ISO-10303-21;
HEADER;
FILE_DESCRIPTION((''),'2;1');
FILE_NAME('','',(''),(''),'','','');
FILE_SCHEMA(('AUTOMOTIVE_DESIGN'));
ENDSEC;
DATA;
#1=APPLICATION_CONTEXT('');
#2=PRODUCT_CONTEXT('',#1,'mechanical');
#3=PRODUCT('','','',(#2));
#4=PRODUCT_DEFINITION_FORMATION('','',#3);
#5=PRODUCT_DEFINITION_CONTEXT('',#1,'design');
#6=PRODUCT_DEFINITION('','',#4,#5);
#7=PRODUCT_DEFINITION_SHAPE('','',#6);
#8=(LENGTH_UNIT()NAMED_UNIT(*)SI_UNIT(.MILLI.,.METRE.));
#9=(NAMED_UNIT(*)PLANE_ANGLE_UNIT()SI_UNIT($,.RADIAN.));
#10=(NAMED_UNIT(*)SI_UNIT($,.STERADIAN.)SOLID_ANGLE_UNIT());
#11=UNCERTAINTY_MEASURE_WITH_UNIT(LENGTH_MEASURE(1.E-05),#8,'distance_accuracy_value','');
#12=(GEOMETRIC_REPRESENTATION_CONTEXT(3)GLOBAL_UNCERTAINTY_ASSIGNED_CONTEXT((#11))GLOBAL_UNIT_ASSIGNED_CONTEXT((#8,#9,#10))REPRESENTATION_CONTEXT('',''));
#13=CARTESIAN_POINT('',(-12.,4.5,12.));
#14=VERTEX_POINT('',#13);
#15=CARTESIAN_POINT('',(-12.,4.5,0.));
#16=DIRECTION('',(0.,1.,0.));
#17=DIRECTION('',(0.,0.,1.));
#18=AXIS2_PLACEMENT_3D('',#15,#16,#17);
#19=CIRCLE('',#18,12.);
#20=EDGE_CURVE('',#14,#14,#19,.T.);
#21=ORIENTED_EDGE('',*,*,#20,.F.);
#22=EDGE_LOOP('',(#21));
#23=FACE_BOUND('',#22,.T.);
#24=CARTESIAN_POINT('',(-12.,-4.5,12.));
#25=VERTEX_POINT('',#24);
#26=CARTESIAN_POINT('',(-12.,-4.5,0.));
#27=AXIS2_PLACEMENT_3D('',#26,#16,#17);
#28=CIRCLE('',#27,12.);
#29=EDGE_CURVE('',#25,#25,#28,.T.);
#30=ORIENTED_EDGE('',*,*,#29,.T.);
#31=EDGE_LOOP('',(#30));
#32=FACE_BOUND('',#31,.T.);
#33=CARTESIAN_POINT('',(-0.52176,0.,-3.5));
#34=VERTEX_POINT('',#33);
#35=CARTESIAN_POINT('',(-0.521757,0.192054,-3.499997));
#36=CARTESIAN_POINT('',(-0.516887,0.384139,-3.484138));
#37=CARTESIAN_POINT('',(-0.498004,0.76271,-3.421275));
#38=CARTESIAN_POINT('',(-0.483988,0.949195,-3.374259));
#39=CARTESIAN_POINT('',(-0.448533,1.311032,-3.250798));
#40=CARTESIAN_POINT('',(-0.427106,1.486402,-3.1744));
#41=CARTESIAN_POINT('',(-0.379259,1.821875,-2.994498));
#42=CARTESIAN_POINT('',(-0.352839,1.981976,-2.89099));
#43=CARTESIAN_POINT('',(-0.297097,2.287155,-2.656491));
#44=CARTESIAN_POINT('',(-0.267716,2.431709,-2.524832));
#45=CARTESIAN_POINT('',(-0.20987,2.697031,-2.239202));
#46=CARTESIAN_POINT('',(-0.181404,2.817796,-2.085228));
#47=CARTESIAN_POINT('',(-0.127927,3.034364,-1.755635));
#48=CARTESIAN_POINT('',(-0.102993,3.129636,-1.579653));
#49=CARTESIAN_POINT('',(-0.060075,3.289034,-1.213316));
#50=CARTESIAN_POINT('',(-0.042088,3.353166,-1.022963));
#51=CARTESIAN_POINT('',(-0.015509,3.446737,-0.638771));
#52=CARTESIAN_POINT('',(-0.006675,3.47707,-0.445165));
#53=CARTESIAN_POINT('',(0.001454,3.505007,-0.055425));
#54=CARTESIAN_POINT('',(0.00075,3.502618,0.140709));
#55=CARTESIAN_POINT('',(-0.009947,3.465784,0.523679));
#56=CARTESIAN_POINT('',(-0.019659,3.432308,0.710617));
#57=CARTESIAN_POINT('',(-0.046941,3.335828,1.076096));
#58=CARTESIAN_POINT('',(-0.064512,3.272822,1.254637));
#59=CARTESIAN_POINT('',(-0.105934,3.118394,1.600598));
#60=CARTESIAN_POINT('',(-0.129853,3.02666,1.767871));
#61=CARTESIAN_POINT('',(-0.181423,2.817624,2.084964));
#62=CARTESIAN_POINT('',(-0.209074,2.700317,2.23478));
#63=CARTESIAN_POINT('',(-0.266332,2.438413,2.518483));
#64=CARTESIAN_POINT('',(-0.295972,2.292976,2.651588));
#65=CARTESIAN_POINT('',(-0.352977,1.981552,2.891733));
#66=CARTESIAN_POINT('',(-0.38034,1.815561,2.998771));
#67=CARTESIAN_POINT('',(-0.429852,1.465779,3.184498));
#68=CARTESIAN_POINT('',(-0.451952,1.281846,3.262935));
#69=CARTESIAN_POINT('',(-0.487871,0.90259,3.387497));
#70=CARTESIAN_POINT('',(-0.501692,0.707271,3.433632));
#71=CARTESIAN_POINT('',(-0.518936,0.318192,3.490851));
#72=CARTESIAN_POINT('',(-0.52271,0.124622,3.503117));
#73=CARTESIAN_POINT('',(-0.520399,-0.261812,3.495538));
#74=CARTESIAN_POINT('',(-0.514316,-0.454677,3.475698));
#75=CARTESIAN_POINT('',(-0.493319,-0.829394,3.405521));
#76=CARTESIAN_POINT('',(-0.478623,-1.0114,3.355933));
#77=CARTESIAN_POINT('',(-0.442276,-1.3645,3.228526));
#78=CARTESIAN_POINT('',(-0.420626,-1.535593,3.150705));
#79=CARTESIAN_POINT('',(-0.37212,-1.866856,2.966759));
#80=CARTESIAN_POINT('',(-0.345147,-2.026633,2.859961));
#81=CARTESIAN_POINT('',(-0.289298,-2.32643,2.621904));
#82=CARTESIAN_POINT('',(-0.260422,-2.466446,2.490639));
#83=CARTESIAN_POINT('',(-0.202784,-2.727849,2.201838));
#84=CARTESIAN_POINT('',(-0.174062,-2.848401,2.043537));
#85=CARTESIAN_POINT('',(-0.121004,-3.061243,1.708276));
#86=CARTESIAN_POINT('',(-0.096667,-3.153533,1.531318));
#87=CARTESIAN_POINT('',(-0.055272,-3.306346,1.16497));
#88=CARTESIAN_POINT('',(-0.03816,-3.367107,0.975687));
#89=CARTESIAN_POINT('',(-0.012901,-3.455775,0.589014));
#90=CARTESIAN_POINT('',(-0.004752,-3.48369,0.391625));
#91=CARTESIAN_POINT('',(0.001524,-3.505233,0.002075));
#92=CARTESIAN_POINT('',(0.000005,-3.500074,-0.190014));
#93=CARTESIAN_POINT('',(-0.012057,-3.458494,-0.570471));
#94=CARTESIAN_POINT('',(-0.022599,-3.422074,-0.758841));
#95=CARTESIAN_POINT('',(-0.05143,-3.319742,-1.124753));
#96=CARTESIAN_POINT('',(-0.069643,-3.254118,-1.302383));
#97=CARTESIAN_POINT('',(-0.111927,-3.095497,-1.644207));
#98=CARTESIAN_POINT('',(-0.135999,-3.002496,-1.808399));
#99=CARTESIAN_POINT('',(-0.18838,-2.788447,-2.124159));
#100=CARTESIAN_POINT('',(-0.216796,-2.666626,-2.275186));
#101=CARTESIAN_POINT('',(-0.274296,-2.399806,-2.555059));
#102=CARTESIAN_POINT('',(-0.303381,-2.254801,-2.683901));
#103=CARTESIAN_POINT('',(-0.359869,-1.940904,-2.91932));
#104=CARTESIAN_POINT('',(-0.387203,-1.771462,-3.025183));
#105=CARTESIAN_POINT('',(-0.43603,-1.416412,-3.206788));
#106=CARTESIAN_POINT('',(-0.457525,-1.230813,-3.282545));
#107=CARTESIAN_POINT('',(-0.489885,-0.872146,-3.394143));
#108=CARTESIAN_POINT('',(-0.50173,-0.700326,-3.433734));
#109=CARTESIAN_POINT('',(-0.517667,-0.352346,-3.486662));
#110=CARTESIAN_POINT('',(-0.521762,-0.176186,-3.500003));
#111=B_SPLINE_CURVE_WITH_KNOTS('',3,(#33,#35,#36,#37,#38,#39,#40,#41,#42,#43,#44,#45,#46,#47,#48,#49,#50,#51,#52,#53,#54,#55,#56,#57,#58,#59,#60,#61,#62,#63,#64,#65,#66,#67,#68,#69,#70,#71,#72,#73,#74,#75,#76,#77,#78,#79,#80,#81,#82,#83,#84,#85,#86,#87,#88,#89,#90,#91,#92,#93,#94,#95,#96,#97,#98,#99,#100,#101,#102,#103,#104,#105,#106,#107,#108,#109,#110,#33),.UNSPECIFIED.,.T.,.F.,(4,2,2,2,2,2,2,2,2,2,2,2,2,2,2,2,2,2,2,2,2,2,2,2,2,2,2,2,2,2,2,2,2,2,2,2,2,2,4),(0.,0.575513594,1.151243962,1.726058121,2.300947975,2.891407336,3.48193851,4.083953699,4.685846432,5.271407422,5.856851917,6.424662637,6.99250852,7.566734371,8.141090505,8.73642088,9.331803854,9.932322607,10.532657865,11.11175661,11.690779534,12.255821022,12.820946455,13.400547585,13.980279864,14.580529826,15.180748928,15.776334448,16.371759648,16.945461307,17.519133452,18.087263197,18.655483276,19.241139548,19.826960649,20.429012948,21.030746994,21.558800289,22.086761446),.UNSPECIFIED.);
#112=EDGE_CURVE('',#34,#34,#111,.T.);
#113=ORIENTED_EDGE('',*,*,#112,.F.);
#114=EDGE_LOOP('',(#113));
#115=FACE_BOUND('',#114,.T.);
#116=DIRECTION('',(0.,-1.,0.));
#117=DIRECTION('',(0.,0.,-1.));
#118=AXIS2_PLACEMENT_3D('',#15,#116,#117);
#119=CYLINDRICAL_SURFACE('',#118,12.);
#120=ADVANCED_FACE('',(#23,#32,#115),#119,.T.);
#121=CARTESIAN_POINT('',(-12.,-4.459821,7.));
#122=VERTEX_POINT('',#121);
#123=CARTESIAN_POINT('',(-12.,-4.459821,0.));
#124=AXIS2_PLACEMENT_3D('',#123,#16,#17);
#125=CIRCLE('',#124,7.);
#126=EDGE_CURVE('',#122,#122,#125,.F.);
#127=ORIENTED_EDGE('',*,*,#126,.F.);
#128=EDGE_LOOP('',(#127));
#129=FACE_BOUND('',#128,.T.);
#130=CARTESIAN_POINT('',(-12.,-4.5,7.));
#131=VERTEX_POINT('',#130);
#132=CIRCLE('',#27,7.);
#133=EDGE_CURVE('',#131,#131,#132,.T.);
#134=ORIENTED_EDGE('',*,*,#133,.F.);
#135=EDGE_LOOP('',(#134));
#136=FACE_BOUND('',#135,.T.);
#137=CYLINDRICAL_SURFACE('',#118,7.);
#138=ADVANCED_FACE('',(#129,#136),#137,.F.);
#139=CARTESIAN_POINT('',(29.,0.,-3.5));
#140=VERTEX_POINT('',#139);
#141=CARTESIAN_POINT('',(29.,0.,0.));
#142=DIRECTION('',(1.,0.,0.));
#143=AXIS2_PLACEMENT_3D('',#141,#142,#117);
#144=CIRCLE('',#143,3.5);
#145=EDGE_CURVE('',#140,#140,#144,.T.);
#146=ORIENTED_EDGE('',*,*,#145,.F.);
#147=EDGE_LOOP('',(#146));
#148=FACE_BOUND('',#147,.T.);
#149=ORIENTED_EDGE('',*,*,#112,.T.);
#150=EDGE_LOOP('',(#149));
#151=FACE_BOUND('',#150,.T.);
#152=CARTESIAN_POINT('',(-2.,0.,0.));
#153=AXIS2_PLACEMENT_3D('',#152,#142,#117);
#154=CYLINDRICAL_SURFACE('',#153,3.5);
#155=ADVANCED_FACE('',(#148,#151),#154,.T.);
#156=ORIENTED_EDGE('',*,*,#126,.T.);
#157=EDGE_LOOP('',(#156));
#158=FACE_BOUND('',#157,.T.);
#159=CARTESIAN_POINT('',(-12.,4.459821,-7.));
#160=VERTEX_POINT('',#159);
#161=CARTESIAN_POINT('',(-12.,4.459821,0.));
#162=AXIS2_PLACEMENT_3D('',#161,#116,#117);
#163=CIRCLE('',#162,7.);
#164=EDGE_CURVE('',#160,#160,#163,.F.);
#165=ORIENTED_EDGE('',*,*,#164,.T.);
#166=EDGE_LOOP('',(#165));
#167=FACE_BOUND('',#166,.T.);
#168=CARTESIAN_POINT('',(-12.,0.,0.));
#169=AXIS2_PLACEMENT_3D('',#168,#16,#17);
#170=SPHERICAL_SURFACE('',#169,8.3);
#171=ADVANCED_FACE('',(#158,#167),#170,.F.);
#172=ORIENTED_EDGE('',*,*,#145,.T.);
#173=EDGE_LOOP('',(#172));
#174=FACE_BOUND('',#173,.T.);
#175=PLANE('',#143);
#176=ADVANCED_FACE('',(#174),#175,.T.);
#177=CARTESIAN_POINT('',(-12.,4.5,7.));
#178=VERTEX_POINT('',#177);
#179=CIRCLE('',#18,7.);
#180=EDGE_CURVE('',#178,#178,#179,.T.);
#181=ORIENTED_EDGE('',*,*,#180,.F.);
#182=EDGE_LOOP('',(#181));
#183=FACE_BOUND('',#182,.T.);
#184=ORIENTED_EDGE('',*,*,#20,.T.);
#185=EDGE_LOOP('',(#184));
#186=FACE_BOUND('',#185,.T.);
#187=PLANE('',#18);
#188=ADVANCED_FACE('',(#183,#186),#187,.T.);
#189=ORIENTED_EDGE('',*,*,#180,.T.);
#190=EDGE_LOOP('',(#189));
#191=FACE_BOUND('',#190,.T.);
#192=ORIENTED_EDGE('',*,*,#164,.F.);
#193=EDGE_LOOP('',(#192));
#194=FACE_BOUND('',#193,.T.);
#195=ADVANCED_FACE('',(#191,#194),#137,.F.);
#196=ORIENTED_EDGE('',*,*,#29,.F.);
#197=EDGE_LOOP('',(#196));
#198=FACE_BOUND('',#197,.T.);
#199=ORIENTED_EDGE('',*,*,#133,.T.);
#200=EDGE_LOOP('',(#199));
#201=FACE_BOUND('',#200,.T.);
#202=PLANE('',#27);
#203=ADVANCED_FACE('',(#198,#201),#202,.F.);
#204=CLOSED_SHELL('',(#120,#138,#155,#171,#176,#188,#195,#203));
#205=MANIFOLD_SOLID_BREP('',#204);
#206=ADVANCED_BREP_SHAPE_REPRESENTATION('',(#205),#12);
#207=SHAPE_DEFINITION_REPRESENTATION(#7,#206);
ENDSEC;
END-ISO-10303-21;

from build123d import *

# Parameters (mm, degrees)
BOSS_EXTRUDE2_DEPTH      = 29
BOSS_EXTRUDE2_DEPTH_BACK = 2
SKETCH1_R                = 3.5
BOSS_EXTRUDE3_DEPTH      = 4.5
BOSS_EXTRUDE3_DEPTH_BACK = 4.5
SKETCH2_R                = 12
SKETCH2_R_2              = 7


# Read off the part's stored shape, not the designer's step: Cut-Revolve-Thin4
with BuildPart() as part:
    # Sketch1 → Boss-Extrude2 (new, two sides: drawn at the far end of the back side and taken through both)
    with BuildSketch(Plane.YZ.offset(-BOSS_EXTRUDE2_DEPTH_BACK)):
        with Locations(Location((0, 0, 0), (0, 0, 270))):
            Circle(SKETCH1_R)
    extrude(amount=BOSS_EXTRUDE2_DEPTH + BOSS_EXTRUDE2_DEPTH_BACK)

    # Sketch2 → Boss-Extrude3 (add, two sides: drawn at the far end of the back side and taken through both)
    with BuildSketch(Plane(origin=(0, 0, 0), x_dir=(-1, 0, 0), z_dir=(0, 1, 0)).offset(-BOSS_EXTRUDE3_DEPTH_BACK)):
        with Locations(Location((12, 0, 0), (0, 0, 90))):
            Circle(SKETCH2_R)
        with Locations(Location((12, 0, 0), (0, 0, 90))):
            Circle(SKETCH2_R_2, mode=Mode.SUBTRACT)
    extrude(amount=BOSS_EXTRUDE3_DEPTH + BOSS_EXTRUDE3_DEPTH_BACK)

    # Cut-Revolve-Thin4 outline → Cut-Revolve-Thin4 (revolve, cut)
    with BuildSketch(Plane(origin=(-12, 0, 0), x_dir=(1, 0, 0), z_dir=(0, 0, 1))):
        with BuildLine():
            Line((6.999999996, 4.459820631), (6.999999996, -4.459820631))
            ThreePointArc((6.999999996, -4.459820631), (8.3, 0), (6.999999996, 4.459820631))
        make_face()
    revolve(axis=Axis((-12, 0, 0), (0, 1, 0)), mode=Mode.SUBTRACT)


solid = part.part
